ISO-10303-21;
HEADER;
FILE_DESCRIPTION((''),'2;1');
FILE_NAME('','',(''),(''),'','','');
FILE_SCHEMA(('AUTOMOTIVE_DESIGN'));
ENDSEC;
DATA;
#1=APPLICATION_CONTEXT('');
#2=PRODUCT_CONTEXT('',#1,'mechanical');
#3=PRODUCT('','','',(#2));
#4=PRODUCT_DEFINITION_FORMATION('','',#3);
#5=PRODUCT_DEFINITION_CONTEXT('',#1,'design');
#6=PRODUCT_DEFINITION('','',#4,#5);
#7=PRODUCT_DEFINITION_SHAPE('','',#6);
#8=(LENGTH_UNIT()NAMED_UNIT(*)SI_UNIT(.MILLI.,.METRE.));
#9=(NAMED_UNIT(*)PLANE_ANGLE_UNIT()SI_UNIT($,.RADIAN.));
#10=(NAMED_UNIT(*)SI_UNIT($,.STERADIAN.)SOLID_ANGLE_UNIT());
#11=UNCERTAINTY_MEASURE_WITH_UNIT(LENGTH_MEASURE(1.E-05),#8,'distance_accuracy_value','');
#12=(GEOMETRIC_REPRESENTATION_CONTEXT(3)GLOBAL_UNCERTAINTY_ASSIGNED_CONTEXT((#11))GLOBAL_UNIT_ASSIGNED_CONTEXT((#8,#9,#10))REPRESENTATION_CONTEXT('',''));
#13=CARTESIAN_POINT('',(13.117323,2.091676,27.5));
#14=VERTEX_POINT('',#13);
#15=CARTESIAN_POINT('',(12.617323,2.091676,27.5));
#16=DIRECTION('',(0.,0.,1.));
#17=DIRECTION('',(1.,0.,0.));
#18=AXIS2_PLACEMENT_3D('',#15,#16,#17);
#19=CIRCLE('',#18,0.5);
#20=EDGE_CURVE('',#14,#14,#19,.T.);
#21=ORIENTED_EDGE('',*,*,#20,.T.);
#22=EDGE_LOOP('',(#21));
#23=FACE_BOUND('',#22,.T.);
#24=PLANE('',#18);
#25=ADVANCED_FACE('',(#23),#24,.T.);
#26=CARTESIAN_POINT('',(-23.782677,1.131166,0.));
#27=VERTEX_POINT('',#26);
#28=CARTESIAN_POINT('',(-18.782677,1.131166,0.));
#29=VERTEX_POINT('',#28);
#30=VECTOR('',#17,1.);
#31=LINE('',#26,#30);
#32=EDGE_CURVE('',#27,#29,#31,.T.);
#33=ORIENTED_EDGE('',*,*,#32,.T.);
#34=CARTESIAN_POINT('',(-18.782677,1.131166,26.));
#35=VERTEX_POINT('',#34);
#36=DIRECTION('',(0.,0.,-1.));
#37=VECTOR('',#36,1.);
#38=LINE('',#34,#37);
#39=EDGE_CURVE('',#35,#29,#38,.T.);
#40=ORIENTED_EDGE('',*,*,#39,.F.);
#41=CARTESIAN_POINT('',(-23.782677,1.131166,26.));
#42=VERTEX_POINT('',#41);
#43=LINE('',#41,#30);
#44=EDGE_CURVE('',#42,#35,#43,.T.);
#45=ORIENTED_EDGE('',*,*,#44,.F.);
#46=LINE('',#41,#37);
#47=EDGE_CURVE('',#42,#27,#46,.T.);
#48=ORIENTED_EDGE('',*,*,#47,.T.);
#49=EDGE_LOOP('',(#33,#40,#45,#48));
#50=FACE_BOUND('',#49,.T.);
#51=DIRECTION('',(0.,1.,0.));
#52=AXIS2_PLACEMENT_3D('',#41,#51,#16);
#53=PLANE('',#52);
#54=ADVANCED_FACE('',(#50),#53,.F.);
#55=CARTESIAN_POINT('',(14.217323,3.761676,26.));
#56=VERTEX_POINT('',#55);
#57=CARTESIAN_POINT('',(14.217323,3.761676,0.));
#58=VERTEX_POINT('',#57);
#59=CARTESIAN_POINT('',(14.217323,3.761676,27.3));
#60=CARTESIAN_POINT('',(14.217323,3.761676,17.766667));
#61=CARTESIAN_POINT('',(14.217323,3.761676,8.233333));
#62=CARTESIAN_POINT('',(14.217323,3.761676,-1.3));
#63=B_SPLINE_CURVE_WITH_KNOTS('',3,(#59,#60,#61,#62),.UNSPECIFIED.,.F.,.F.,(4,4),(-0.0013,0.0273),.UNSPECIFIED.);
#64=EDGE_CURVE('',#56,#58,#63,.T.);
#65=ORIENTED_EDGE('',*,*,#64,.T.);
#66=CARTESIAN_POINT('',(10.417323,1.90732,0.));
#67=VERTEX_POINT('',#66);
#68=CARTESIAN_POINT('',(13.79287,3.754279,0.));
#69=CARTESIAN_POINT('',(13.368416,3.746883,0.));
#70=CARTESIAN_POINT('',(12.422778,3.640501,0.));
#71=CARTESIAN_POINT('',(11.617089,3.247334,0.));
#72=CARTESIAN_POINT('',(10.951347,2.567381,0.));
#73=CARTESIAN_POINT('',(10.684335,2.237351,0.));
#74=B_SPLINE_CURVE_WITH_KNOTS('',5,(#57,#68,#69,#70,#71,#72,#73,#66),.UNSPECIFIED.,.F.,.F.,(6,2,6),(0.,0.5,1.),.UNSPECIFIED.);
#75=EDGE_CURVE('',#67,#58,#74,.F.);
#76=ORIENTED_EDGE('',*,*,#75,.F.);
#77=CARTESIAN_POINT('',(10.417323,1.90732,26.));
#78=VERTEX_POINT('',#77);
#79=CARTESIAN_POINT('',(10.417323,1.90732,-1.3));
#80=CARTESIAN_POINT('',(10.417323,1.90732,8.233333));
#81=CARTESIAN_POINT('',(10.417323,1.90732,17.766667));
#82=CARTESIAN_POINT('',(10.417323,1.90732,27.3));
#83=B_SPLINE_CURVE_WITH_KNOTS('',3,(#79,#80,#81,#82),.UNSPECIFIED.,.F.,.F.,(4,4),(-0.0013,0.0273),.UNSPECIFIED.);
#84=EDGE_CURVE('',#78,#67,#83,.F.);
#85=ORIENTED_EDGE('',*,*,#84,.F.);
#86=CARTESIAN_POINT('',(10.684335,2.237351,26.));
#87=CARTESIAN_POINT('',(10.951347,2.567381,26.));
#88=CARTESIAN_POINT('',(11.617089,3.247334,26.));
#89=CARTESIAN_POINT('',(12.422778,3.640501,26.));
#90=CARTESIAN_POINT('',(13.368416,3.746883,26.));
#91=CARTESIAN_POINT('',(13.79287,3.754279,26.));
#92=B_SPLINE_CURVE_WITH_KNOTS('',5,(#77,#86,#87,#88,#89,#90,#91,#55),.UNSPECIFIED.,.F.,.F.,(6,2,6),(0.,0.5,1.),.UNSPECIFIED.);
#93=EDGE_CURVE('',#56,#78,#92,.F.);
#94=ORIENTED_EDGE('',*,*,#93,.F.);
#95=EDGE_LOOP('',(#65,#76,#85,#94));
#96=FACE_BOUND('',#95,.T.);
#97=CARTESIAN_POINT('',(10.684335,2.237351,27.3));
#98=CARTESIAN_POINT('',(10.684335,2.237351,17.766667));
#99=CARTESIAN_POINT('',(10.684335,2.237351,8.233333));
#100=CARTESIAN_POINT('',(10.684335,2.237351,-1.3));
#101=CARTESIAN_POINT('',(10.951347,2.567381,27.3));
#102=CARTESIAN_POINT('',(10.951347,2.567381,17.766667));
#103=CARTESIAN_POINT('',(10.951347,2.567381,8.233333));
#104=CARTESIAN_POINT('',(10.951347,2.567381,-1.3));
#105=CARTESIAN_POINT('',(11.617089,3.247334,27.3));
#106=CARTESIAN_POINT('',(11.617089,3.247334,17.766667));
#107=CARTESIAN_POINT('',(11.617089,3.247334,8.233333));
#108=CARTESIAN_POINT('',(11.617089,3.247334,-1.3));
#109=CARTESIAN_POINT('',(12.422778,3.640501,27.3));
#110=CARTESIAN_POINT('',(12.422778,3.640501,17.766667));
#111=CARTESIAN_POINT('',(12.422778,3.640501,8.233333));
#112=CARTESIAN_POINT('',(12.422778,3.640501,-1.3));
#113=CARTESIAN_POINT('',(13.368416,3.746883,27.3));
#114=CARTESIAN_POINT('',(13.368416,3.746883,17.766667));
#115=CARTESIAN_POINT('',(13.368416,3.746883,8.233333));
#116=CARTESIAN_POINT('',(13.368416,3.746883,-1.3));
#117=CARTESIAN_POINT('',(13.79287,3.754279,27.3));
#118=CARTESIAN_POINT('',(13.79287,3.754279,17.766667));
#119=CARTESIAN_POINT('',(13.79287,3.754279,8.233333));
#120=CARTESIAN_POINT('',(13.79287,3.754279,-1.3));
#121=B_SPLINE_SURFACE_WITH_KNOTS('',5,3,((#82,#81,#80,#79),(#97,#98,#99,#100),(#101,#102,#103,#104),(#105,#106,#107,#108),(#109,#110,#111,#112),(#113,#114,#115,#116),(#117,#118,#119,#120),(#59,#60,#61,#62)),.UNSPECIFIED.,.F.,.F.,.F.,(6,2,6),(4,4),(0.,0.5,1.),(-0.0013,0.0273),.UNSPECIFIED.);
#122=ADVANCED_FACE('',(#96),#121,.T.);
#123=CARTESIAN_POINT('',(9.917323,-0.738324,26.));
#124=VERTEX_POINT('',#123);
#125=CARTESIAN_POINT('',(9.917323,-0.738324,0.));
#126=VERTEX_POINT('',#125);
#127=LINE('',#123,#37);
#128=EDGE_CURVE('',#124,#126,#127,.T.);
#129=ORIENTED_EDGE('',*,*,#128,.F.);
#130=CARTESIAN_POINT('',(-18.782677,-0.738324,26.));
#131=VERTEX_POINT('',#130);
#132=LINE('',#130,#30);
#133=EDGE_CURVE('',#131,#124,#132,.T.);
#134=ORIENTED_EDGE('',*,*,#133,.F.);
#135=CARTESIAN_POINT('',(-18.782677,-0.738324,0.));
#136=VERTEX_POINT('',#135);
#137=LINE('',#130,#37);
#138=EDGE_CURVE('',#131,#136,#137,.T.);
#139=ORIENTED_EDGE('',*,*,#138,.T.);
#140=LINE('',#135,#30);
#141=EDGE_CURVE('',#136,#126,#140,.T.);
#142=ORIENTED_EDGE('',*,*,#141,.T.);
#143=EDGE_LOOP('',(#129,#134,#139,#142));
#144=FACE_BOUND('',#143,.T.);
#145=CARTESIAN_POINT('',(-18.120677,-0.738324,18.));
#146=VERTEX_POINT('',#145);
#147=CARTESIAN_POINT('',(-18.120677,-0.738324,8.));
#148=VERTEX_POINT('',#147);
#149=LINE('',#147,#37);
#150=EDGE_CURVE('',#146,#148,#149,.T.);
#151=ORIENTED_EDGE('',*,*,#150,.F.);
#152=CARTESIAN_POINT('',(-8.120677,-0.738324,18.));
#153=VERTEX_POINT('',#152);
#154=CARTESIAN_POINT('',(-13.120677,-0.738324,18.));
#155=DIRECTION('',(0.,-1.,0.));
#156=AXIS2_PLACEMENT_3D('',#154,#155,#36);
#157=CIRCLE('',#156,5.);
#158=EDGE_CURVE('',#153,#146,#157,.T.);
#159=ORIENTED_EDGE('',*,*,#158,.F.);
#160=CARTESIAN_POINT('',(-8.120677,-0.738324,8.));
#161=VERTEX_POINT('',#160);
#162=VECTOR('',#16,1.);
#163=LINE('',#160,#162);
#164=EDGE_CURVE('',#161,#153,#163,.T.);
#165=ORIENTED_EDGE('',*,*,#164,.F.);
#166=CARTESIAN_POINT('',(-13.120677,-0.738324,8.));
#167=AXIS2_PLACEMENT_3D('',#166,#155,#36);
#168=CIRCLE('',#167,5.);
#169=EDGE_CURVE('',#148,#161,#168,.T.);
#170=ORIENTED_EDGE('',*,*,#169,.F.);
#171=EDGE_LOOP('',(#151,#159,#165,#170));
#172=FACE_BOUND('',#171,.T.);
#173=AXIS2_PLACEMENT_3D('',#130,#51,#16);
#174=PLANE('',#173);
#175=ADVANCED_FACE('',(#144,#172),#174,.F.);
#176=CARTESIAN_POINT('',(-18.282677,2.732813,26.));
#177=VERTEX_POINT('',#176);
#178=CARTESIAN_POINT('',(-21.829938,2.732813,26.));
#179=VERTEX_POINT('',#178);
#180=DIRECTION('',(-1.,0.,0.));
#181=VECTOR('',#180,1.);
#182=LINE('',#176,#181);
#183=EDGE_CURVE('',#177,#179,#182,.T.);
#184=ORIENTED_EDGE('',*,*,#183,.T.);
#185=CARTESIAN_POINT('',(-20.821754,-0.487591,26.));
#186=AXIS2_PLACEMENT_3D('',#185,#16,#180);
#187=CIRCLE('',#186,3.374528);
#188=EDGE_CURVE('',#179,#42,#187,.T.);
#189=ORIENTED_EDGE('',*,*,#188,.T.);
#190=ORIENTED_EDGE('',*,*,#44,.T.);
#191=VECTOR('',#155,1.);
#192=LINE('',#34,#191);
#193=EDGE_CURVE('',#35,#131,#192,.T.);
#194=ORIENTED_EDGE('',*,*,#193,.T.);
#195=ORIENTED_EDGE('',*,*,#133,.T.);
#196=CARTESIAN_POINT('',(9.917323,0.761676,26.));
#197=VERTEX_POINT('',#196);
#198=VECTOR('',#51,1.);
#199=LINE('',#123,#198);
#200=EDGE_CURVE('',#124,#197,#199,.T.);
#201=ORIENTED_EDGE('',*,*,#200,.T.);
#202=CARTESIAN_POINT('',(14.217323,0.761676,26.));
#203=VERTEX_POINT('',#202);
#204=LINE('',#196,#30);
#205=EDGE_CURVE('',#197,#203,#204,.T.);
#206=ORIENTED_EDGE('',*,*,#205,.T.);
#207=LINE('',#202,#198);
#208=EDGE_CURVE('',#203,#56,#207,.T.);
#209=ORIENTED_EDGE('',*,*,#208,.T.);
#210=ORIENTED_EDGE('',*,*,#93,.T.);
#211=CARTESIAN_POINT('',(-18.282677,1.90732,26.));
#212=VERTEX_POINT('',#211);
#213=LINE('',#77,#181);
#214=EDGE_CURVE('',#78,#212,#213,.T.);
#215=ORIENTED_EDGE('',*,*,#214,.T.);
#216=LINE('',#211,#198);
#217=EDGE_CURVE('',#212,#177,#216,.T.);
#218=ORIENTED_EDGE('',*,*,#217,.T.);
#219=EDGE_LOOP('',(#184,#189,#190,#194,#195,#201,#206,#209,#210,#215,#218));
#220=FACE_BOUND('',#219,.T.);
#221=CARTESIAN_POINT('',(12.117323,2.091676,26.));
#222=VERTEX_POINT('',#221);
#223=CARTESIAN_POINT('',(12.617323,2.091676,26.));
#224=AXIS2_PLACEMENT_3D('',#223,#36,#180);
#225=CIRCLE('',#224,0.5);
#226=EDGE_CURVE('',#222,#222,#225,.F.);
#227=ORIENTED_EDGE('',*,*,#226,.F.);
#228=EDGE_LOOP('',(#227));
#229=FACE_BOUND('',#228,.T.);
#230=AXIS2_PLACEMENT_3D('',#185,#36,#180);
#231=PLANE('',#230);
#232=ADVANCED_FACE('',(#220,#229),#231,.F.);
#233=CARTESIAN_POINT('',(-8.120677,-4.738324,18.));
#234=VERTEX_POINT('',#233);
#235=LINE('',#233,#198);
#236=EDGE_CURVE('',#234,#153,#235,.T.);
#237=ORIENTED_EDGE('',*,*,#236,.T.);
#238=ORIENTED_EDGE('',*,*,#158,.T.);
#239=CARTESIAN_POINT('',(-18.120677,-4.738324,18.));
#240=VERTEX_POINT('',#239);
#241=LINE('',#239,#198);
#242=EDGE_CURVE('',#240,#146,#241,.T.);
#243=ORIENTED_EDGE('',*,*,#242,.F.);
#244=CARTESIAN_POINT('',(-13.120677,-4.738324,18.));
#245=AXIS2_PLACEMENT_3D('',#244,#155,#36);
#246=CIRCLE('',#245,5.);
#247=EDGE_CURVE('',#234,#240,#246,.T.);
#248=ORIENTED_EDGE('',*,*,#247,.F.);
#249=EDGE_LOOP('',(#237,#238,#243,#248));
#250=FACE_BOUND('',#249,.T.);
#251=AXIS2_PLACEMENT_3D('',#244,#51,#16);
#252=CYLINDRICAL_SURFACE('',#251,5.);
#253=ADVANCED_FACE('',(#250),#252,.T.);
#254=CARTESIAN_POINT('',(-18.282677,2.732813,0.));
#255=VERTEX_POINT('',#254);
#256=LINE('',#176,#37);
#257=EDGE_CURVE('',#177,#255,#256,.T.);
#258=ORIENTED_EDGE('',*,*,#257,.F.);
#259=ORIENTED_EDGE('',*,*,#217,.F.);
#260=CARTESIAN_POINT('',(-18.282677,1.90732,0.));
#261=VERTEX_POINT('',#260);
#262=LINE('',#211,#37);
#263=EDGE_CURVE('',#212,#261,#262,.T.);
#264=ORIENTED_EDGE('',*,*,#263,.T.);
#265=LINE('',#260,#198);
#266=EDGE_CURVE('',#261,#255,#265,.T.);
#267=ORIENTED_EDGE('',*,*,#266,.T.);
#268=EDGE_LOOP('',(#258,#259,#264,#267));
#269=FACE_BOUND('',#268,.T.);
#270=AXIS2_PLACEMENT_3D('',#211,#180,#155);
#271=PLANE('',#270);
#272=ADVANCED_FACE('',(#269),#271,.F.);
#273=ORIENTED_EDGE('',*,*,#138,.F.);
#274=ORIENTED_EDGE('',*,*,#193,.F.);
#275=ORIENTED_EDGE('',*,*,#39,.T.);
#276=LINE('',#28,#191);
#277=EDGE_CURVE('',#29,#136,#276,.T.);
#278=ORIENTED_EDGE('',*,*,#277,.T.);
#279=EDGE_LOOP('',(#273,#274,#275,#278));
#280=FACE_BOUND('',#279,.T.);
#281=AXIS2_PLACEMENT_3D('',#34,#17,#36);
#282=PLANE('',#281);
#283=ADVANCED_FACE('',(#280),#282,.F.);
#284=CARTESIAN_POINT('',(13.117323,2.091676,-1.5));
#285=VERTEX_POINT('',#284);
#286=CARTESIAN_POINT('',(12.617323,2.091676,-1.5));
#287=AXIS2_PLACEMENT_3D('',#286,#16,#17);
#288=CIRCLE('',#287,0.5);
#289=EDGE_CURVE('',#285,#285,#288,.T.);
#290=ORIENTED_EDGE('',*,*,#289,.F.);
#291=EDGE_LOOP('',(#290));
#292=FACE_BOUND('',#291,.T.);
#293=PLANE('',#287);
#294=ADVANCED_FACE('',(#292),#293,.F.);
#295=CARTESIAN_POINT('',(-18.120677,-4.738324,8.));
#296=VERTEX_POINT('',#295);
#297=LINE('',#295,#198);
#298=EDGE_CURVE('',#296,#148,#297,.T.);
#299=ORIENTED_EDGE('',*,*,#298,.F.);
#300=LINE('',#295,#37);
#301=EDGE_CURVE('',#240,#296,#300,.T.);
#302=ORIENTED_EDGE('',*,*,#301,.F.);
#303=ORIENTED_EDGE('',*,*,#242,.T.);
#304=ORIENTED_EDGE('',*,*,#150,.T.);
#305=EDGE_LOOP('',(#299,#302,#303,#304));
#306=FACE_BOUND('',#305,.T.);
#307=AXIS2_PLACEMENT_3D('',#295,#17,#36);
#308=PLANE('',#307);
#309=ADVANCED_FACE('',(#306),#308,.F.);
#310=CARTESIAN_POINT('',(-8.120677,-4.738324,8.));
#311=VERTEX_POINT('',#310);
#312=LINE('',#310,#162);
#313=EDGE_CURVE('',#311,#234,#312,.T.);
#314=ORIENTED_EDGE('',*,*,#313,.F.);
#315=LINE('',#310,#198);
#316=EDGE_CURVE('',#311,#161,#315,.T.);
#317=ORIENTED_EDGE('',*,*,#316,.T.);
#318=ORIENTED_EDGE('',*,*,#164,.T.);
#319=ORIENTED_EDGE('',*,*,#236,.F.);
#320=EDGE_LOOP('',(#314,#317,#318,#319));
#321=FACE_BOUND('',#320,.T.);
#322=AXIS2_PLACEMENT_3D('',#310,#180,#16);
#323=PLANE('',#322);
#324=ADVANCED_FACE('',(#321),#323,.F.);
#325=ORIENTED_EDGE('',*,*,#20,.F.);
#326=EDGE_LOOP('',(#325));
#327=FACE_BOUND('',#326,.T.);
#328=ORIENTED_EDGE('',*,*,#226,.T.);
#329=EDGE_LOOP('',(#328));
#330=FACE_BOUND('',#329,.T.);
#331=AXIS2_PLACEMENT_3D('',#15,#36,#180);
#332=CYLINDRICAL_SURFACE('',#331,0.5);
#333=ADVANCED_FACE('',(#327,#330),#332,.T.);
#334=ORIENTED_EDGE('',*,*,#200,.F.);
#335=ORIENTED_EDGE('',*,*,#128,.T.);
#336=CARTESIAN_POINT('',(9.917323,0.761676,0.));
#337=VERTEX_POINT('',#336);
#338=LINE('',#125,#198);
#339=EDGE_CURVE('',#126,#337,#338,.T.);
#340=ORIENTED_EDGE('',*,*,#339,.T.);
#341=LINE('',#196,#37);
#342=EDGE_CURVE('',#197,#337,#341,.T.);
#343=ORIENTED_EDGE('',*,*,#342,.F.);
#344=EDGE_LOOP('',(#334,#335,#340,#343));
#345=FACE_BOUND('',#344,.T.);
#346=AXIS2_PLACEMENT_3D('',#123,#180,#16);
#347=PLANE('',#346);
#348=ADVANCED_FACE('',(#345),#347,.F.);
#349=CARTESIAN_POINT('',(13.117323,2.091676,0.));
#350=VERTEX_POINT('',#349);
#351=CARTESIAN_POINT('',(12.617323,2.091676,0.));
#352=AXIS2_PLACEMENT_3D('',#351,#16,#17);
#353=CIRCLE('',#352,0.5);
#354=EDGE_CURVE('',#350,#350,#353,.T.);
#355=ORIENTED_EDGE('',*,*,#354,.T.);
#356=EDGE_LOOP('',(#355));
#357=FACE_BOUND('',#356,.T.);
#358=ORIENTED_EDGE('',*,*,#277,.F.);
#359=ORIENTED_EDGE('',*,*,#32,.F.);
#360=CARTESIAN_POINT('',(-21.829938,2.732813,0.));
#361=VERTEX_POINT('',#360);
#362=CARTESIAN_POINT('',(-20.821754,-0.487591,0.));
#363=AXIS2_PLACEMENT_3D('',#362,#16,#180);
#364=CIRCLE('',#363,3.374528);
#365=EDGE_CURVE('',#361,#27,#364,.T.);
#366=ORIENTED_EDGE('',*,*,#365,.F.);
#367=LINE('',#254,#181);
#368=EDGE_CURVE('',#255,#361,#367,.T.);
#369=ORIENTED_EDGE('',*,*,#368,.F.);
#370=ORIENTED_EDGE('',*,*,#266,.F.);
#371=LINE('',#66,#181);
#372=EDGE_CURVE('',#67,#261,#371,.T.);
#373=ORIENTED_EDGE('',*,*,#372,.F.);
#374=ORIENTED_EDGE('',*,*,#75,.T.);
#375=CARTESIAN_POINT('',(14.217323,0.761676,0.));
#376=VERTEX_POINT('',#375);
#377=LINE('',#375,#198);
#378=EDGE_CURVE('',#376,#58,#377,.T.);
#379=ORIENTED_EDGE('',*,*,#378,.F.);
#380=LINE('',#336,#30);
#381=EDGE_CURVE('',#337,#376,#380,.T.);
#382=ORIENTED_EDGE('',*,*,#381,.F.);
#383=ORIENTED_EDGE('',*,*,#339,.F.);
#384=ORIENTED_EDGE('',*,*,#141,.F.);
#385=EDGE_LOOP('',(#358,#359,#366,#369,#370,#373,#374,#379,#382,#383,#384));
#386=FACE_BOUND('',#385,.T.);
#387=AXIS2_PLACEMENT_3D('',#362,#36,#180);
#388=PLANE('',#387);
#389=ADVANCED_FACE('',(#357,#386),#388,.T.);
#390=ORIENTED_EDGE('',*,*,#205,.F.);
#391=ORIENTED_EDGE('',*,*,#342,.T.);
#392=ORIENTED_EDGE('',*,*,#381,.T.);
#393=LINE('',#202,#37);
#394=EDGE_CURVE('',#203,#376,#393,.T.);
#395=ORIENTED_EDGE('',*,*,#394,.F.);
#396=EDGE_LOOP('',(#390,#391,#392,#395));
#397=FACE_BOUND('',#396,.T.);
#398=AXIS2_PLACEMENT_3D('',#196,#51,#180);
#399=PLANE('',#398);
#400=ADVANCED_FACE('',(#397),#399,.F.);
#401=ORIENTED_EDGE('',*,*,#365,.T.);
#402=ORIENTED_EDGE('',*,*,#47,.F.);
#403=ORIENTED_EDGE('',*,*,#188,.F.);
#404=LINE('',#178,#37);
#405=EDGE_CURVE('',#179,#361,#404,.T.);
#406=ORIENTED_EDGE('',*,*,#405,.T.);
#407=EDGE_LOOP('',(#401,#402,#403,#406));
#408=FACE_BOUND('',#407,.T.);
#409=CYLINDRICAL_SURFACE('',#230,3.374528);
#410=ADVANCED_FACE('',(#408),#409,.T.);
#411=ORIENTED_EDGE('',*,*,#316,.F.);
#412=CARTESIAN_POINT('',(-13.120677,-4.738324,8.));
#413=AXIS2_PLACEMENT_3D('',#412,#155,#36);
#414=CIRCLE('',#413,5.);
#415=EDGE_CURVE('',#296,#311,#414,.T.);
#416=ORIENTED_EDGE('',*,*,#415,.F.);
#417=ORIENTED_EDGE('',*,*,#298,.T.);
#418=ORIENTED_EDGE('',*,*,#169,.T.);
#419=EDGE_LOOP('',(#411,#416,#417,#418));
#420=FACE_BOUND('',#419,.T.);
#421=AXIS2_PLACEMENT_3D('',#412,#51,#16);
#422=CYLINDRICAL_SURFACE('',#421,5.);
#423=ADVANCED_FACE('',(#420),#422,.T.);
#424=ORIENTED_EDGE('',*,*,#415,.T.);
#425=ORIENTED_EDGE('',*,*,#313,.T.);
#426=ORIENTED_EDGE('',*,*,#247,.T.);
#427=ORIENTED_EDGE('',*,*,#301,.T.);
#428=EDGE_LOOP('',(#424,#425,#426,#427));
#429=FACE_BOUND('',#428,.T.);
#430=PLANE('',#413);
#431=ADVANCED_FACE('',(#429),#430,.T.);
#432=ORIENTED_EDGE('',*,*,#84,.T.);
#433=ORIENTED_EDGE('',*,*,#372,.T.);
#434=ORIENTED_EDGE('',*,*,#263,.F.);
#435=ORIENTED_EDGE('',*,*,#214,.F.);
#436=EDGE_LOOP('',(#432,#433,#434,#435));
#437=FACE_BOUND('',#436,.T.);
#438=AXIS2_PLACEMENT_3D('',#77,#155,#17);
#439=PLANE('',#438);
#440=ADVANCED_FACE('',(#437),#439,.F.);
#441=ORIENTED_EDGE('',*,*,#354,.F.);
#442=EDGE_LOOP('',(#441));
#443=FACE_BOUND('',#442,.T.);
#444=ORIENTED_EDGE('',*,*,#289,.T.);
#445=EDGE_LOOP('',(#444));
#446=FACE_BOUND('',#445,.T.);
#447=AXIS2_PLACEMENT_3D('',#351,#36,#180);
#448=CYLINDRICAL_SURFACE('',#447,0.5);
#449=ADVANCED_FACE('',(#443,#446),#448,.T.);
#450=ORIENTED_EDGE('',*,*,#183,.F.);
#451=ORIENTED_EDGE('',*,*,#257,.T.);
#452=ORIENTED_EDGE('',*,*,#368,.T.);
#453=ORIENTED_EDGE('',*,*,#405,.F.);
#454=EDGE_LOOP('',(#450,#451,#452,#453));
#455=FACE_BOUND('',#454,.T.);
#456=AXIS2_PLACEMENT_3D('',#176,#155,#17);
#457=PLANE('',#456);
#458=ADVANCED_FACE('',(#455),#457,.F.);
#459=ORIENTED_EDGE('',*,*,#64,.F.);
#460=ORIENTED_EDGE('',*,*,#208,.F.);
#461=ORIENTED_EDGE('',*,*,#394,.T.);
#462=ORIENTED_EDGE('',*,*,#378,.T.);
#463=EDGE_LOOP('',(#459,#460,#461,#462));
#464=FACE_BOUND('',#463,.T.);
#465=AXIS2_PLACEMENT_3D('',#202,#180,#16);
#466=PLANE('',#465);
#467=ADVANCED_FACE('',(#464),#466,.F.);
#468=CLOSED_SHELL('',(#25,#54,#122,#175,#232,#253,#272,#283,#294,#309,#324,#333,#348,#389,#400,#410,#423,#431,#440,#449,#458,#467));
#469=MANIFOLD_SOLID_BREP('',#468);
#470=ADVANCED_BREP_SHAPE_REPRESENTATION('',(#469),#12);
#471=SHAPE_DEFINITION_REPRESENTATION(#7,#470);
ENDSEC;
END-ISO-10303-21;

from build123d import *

# Parameters (mm, degrees)
BOSS_EXTRUDE3_DEPTH = 26
FILLET6_START       = -1
FILLET6_DEPTH       = 28
BOSS_EXTRUDE5_DEPTH = 4
SKETCH6_R           = 0.5
BOSS_EXTRUDE6_DEPTH = 1.5
LPATTERN1_COUNT     = 2
LPATTERN1_PITCH     = 27.5


with BuildPart() as part:
    # Sketch4 → Boss-Extrude3 (new body)
    with BuildSketch(Plane.XY):
        with BuildLine():
            Line((-18.782676832, -0.738323828), (9.917323168, -0.738323828))
            Line((9.917323168, -0.738323828), (9.917323168, 0.761676172))
            Line((9.917323168, 0.761676172), (14.217323168, 0.761676172))
            Line((14.217323168, 0.761676172), (14.217323168, 3.761676172))
            Line((14.217323168, 3.761676172), (10.417323168, 3.761676172))
            Line((10.417323168, 3.761676172), (10.417323168, 1.907320096))
            Line((10.417323168, 1.907320096), (-18.282676832, 1.907320096))
            Line((-18.282676832, 1.907320096), (-18.282676832, 2.732812963))
            Line((-18.282676832, 2.732812963), (-21.829938074, 2.732812963))
            ThreePointArc((-21.829938074, 2.732812963), (-22.961793852, 2.121559656), (-23.782676832, 1.131166179))
            Line((-23.782676832, 1.131166179), (-18.782676832, 1.131166179))
            Line((-18.782676832, 1.131166179), (-18.782676832, -0.738323828))
        make_face()
    extrude(amount=BOSS_EXTRUDE3_DEPTH)

    # Fillet6: read off the stored shape, not the designer's step
    # Fillet6 outline → Fillet6 (cut)
    with BuildSketch(Plane.XY.offset(FILLET6_START)):
        with BuildLine():
            Line((10.417323168, 3.761676172), (10.417323168, 1.907320096))
            add(Edge.make_bspline(
                [(10.417323168, 1.907320096), (10.684335221, 2.237350554), (10.951347275, 2.567381012), (11.617088855, 3.247333717), (12.422778443, 3.640500924), (13.36841604, 3.74688263), (13.792869604, 3.754279401), (14.217323168, 3.761676172)],
                knots=[0, 0, 0, 0, 0, 0, 0.5, 0.5, 1, 1, 1, 1, 1, 1], degree=5))
            Line((14.217323168, 3.761676172), (10.417323168, 3.761676172))
        make_face()
    extrude(amount=FILLET6_DEPTH, mode=Mode.SUBTRACT)

    # Sketch5 → Boss-Extrude5 (add)
    with BuildSketch(Plane(origin=(0, -0.738323828, 0), x_dir=(-1, 0, 0), z_dir=(0, -1, 0))):
        with BuildLine():
            Line((18.120676832, -8), (18.120676832, -18))
            ThreePointArc((18.120676832, -18), (13.120676832, -23), (8.120676832, -18))
            Line((8.120676832, -18), (8.120676832, -8))
            ThreePointArc((8.120676832, -8), (13.120676832, -3), (18.120676832, -8))
        make_face()
    extrude(amount=BOSS_EXTRUDE5_DEPTH)

    # Sketch6 → Boss-Extrude6 (add)
    with BuildSketch(Plane.XY.offset(26)):
        with Locations(Location((12.617323168, 2.091676172, 0), (0, 0, 180))):
            Circle(SKETCH6_R)
    boss_extrude6 = extrude(amount=BOSS_EXTRUDE6_DEPTH)

    # LPattern1: Boss-Extrude6 ×2
    with Locations(*[(0, 0, -i * LPATTERN1_PITCH) for i in range(1, LPATTERN1_COUNT)]):
        add(boss_extrude6)


solid = part.part
